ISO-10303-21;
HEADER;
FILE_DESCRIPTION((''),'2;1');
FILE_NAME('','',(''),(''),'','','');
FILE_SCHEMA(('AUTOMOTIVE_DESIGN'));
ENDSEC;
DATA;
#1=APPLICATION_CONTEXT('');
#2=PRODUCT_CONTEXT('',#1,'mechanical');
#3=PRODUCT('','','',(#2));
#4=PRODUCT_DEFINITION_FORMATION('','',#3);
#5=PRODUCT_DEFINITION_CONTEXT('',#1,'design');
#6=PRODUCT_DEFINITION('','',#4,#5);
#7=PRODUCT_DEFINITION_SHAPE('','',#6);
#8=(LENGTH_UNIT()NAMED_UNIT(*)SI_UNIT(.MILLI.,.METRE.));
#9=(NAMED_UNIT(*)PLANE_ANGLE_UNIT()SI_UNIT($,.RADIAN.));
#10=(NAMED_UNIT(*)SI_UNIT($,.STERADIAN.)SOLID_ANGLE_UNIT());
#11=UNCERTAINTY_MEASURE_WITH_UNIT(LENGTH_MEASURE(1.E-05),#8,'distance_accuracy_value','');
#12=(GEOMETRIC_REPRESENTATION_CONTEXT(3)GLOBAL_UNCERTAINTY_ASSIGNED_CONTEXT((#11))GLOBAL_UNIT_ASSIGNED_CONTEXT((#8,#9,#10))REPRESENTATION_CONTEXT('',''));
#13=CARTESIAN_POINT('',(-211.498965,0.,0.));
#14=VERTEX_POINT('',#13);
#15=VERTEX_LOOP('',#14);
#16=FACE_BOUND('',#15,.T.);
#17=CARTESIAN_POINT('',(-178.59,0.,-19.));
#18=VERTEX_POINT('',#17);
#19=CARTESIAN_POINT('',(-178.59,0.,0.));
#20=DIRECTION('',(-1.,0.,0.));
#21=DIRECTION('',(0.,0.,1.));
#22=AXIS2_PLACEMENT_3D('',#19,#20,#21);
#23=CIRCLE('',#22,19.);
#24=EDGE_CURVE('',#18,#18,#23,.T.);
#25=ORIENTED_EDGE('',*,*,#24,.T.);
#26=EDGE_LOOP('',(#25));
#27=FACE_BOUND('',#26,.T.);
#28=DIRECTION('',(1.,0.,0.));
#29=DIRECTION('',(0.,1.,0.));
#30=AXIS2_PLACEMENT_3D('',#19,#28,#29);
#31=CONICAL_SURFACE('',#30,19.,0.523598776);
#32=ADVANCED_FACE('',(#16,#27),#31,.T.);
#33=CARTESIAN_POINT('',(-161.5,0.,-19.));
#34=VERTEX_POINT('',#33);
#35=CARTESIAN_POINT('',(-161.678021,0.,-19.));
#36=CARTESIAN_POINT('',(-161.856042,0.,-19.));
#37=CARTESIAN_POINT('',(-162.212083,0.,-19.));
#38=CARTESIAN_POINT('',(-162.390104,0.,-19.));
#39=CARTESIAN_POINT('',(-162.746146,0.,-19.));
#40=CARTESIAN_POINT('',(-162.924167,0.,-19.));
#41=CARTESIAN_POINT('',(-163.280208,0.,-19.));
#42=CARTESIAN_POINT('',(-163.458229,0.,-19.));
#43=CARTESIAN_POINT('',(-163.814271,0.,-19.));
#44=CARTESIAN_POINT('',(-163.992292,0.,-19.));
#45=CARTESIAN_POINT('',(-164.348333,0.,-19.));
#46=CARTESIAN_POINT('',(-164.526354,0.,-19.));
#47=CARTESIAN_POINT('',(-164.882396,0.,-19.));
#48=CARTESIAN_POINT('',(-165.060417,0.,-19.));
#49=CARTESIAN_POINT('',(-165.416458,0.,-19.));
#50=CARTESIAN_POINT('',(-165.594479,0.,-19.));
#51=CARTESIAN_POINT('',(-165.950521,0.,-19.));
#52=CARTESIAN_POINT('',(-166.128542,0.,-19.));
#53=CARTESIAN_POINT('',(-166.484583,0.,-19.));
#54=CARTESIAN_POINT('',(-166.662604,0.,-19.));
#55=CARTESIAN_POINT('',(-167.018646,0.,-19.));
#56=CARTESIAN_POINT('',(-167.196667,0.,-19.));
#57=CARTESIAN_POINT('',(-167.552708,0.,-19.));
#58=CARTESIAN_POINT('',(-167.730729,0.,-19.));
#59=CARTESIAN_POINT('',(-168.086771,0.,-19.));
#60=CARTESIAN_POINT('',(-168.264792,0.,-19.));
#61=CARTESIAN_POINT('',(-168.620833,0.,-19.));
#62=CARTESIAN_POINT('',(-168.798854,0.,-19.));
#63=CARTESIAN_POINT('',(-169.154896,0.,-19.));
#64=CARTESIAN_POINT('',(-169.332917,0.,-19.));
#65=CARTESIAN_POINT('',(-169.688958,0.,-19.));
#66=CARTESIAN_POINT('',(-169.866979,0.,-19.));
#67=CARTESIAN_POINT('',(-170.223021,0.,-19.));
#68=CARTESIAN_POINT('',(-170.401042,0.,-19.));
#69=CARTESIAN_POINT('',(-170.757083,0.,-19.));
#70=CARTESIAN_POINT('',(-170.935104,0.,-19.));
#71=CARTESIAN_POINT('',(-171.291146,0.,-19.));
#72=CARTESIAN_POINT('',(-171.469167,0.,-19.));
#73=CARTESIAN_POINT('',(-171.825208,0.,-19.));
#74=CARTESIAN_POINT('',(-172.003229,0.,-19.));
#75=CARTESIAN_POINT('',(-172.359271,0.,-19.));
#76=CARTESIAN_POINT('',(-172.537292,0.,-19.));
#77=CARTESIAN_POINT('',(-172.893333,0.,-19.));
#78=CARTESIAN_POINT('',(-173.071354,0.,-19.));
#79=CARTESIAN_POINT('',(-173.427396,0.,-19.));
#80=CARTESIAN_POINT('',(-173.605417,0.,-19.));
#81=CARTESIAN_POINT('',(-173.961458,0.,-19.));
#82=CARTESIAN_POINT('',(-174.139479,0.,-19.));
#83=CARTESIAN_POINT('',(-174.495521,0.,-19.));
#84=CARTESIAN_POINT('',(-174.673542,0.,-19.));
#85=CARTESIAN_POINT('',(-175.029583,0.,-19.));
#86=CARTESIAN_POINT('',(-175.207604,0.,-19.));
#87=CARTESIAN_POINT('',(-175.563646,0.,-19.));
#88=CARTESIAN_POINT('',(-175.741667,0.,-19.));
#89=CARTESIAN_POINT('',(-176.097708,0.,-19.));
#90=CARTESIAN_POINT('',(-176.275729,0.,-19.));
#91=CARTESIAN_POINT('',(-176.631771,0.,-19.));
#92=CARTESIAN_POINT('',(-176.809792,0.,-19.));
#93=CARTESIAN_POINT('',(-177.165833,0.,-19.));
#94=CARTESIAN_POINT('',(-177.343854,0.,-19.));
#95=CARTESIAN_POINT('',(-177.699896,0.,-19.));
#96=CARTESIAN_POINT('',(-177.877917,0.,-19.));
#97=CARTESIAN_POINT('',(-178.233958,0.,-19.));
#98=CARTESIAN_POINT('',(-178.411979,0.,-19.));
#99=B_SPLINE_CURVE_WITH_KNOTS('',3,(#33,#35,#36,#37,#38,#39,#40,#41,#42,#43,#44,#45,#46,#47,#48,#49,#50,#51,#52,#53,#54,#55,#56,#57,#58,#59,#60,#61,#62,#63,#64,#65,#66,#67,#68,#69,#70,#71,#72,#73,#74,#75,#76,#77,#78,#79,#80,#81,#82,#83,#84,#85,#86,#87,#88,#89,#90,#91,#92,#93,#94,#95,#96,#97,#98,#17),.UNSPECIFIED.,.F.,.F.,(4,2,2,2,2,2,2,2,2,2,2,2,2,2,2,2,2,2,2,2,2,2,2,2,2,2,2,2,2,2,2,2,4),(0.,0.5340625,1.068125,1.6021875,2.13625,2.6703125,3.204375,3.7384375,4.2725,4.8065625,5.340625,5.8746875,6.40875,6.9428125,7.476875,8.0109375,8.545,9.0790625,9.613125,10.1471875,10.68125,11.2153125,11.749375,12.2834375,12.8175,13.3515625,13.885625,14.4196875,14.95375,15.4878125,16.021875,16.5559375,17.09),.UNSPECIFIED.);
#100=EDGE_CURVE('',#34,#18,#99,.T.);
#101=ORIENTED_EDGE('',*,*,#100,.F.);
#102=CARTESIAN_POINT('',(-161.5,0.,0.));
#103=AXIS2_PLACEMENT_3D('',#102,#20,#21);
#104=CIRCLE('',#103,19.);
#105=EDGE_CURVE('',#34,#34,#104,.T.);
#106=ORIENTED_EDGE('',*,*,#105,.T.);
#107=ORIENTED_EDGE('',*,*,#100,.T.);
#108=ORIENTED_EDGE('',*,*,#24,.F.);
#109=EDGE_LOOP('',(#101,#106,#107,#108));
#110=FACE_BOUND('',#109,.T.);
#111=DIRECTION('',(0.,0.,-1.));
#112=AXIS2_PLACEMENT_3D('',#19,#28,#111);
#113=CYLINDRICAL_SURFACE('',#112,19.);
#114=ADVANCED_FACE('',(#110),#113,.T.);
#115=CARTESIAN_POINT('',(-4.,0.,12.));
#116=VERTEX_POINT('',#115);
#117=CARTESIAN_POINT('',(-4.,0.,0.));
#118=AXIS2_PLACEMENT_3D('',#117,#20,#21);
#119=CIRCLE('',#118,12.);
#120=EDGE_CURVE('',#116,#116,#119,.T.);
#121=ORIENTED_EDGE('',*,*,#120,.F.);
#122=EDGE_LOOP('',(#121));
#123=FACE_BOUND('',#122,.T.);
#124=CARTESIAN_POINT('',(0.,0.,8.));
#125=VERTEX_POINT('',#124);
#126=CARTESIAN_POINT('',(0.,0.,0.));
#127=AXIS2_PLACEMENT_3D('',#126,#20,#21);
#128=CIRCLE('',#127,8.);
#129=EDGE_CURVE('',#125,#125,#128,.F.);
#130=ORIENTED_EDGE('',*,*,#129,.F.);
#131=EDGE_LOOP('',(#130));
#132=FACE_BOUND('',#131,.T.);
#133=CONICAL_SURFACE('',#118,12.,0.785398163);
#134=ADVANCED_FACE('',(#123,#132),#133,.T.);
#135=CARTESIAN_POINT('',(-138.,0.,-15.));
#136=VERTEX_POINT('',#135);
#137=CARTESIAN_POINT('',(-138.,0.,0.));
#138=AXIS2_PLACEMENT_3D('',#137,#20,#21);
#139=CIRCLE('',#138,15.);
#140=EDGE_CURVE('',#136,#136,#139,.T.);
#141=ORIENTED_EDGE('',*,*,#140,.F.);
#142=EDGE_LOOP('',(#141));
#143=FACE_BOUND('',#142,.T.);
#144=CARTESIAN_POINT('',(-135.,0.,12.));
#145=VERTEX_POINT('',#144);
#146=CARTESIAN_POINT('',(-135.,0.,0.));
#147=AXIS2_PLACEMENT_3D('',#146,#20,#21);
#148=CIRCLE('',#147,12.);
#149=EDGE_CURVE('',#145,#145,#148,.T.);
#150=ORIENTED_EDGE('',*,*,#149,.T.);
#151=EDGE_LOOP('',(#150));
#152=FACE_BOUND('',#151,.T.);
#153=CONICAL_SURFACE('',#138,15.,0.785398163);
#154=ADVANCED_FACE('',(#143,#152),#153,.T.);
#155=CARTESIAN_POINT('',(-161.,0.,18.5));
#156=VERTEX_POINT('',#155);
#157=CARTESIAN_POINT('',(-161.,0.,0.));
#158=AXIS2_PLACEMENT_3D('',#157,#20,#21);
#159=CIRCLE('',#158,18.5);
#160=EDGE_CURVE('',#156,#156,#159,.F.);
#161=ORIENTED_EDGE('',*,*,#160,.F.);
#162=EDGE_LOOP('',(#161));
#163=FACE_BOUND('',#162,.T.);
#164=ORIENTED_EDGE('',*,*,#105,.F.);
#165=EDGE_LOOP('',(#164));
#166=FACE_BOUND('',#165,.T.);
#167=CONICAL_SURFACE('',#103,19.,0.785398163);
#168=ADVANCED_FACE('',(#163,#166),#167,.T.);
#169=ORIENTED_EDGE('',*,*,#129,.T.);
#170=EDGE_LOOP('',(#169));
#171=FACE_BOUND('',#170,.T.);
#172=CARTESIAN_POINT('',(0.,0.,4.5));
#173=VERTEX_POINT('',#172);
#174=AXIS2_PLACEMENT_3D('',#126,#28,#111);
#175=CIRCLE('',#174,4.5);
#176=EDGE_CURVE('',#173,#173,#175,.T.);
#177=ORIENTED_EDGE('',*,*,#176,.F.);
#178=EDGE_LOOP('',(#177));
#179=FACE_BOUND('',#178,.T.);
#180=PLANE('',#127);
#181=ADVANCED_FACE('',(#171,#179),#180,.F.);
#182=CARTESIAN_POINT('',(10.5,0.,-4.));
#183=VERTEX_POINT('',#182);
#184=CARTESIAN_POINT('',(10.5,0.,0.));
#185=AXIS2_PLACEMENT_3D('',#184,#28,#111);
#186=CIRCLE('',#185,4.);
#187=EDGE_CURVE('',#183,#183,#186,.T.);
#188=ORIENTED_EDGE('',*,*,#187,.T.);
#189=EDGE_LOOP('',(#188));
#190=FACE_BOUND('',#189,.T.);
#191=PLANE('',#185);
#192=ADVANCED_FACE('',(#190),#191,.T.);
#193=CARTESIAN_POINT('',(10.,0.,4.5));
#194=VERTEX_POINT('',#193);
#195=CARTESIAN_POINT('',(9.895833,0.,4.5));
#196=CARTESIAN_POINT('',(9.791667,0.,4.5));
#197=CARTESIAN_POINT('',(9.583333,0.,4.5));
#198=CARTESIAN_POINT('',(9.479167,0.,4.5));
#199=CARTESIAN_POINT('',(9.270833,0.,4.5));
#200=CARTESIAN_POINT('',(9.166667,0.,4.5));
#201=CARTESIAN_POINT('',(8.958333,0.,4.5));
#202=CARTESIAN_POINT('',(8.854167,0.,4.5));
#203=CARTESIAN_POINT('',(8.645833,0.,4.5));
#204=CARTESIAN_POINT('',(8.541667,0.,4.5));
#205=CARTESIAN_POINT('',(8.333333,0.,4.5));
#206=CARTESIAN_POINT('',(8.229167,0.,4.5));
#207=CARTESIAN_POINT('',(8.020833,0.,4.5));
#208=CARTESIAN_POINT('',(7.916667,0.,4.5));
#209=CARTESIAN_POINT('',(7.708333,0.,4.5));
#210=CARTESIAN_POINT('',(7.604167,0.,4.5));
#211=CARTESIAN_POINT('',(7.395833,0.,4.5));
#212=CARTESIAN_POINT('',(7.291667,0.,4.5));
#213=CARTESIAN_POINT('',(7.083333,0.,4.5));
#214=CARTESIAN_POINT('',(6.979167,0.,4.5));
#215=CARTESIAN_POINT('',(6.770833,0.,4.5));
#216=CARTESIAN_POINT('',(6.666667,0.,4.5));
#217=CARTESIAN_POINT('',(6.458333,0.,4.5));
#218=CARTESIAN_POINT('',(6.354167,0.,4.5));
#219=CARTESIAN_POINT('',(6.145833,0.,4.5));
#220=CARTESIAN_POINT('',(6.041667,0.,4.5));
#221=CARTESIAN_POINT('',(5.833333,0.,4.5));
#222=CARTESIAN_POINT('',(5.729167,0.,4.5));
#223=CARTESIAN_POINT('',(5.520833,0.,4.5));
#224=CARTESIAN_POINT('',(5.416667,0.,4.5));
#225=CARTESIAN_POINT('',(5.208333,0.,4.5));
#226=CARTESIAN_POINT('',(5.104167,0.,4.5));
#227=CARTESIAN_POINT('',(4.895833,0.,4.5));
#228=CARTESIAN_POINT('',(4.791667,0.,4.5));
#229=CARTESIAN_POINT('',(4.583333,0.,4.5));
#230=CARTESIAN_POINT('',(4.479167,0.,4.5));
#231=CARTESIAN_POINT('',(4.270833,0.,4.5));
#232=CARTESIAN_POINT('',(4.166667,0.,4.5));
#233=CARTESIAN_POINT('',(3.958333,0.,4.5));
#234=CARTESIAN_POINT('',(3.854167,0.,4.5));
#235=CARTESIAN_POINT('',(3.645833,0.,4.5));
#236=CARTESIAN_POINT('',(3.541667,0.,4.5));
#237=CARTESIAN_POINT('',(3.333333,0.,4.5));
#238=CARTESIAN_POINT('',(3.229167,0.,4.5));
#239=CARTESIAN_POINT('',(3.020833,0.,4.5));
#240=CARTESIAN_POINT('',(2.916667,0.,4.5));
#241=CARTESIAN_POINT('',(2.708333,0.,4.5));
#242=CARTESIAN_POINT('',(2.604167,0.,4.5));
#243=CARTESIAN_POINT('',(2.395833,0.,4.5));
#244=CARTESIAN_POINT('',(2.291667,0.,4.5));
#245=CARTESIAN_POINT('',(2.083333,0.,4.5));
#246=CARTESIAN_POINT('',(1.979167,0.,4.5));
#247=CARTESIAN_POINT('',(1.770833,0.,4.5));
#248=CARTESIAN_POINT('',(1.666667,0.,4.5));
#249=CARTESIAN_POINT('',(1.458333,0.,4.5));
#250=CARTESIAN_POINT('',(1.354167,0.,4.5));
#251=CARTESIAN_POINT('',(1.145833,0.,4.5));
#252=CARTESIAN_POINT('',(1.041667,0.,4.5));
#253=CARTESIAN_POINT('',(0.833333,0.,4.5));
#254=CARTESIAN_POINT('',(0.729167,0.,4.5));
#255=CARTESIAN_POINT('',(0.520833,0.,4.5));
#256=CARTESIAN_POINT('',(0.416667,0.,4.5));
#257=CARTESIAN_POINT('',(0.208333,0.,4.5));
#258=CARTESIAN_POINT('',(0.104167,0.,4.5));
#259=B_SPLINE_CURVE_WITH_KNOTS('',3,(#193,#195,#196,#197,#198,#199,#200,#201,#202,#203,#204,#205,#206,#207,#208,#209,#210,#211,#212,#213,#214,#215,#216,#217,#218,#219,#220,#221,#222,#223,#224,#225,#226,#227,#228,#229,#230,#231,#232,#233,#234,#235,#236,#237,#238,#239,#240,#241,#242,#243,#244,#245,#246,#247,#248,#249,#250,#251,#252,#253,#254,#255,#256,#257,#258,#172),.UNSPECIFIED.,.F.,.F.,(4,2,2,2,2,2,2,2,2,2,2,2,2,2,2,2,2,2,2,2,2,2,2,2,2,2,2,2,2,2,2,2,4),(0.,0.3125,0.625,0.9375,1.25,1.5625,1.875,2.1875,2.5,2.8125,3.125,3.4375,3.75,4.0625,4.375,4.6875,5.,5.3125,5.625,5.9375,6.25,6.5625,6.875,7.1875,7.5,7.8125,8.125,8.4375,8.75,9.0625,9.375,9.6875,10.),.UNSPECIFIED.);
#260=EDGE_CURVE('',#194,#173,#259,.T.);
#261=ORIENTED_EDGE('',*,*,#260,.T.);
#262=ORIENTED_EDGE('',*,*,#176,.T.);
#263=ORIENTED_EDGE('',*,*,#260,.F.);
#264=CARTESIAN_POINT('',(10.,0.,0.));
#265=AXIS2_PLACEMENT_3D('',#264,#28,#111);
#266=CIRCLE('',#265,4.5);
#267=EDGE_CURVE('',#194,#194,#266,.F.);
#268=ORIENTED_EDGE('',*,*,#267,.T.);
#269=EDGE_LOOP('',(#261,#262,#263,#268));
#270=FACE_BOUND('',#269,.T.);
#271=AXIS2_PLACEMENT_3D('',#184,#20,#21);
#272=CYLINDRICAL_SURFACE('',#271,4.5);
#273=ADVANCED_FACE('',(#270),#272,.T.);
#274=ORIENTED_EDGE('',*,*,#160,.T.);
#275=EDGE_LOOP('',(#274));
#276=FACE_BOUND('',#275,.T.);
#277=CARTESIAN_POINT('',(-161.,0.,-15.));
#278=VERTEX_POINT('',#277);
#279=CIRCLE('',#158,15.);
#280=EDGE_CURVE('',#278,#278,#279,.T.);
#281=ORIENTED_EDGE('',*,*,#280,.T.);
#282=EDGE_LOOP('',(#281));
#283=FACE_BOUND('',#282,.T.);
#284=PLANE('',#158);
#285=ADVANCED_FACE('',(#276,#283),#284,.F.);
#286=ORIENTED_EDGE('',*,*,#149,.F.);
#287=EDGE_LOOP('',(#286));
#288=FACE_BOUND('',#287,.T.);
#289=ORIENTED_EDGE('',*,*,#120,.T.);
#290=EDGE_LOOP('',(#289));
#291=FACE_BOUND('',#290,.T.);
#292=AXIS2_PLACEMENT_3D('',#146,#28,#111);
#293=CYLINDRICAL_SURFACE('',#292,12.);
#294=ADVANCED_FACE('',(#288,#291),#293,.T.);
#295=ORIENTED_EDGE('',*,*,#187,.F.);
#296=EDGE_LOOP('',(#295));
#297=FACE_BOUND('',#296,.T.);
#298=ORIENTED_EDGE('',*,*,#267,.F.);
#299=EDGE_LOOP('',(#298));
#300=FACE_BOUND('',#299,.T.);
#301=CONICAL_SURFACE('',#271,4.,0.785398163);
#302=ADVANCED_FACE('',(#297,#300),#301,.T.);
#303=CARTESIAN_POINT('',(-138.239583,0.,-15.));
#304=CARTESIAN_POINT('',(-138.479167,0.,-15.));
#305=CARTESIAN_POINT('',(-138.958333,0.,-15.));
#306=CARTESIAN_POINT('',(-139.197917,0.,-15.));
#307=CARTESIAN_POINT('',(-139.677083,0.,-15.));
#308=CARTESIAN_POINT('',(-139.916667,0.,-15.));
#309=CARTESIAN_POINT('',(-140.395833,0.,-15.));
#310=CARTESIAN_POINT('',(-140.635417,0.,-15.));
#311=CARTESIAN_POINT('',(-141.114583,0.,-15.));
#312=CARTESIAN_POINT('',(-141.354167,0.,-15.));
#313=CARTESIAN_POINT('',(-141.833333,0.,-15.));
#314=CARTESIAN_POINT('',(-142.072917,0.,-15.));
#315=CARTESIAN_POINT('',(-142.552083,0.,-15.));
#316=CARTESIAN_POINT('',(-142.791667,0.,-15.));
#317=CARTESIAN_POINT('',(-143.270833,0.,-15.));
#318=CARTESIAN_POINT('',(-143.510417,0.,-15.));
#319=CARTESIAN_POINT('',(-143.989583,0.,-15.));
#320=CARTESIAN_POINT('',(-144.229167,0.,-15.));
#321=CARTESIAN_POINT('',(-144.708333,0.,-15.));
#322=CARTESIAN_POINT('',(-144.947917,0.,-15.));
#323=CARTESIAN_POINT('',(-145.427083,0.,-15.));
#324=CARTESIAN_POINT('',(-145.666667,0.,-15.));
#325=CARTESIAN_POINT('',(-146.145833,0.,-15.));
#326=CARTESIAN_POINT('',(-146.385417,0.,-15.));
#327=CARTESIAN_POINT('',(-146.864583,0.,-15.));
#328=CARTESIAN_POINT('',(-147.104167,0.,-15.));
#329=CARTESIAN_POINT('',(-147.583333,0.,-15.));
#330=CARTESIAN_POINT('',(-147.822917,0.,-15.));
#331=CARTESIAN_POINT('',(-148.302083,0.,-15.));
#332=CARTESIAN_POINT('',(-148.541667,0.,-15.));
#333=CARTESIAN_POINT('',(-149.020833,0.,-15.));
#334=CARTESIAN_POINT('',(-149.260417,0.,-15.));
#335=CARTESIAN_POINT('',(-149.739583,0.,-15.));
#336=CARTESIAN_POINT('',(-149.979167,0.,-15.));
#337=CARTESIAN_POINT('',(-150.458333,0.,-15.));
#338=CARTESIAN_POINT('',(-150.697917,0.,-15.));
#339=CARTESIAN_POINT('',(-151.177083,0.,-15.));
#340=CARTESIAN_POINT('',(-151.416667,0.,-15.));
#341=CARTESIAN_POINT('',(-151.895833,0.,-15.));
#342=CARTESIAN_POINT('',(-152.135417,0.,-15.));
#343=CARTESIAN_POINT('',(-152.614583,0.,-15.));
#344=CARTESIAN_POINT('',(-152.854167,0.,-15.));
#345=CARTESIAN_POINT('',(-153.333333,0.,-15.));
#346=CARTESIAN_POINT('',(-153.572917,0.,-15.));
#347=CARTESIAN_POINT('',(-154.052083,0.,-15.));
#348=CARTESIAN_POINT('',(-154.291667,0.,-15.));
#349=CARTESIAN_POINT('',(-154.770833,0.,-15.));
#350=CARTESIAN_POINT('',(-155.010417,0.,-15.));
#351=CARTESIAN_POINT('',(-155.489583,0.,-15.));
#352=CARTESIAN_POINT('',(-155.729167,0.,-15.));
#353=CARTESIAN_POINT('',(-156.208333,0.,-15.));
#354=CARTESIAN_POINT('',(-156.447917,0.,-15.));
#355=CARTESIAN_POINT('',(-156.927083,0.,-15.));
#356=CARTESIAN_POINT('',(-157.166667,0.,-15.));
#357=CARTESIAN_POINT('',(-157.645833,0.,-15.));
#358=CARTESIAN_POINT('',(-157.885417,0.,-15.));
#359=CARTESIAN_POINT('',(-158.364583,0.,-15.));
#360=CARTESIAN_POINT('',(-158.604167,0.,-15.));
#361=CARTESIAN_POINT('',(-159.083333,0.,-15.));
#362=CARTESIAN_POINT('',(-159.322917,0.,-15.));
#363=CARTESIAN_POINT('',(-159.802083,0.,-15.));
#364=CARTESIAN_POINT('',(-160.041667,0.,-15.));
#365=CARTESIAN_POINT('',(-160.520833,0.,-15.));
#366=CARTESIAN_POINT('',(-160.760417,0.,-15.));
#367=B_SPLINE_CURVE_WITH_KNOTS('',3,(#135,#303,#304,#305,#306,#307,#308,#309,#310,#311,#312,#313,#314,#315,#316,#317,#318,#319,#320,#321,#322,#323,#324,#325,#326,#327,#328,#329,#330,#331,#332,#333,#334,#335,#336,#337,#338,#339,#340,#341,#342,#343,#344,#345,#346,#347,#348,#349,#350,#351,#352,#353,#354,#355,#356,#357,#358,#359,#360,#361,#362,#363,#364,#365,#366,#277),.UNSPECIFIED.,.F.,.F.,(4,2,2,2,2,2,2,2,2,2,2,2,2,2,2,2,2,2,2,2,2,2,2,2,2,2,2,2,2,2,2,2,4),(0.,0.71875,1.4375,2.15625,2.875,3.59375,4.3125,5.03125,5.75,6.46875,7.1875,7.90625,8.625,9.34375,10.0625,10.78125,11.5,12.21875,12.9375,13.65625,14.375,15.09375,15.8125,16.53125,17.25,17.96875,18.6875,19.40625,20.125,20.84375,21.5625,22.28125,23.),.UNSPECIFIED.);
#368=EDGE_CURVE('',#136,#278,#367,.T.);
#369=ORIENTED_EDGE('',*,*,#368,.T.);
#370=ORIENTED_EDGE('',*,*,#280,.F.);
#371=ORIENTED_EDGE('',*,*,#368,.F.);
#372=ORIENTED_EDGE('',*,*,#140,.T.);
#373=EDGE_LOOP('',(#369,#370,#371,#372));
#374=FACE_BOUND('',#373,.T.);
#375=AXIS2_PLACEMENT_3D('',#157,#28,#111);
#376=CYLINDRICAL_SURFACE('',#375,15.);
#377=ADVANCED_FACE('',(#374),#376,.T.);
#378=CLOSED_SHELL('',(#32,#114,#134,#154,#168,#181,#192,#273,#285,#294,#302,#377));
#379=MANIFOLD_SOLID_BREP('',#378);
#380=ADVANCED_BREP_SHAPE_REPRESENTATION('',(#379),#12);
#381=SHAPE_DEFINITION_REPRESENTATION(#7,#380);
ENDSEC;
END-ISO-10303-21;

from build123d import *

# Parameters (mm, degrees)
SZKIC5_R                    = 4.5
DODANIE_WYCI_GNI_CIE4_DEPTH = 10.5
SFAZOWANIE1_SIZE            = 0.5
SZKIC6_R                    = 12
DODANIE_WYCI_GNI_CIE5_DEPTH = 135
SFAZOWANIE2_SIZE            = 4
SZKIC7_R                    = 15
DODANIE_WYCI_GNI_CIE6_DEPTH = 26
SFAZOWANIE4_SIZE            = 3
SZKIC8_R                    = 19
DODANIE_WYCI_GNI_CIE7_DEPTH = 17.59
SFAZOWANIE5_SIZE            = 0.5


with BuildPart() as part:
    # Szkic5 → Dodanie-wyciągnięcie4 (new body)
    with BuildSketch(Plane(origin=(0, 0, 0), x_dir=(0, 0, -1), z_dir=(1, 0, 0))):
        with Locations(Location((0, 0, 0), (0, 0, 180))):
            Circle(SZKIC5_R)
    extrude(amount=DODANIE_WYCI_GNI_CIE4_DEPTH)

    # Sfazowanie1
    sfazowanie1_edges = [part.edges().sort_by_distance(p)[0] for p in [
        (10.5, 0, -4.5),
    ]]
    chamfer(sfazowanie1_edges, length=SFAZOWANIE1_SIZE)

    # Szkic6 → Dodanie-wyciągnięcie5 (add)
    with BuildSketch(Plane.ZY):
        Circle(SZKIC6_R)
    extrude(amount=DODANIE_WYCI_GNI_CIE5_DEPTH)

    # Sfazowanie2
    sfazowanie2_edges = [part.edges().sort_by_distance(p)[0] for p in [
        (0, 0, -12),
    ]]
    chamfer(sfazowanie2_edges, length=SFAZOWANIE2_SIZE)

    # Szkic7 → Dodanie-wyciągnięcie6 (add)
    with BuildSketch(Plane.ZY.offset(135)):
        with Locations(Location((0, 0, 0), (0, 0, 180))):
            Circle(SZKIC7_R)
    extrude(amount=DODANIE_WYCI_GNI_CIE6_DEPTH)

    # Sfazowanie4
    sfazowanie4_edges = [part.edges().sort_by_distance(p)[0] for p in [
        (-135, 0, 15),
    ]]
    chamfer(sfazowanie4_edges, length=SFAZOWANIE4_SIZE - 0.0001)  # a hair under: the kernel refuses the full size

    # Szkic8 → Dodanie-wyciągnięcie7 (add)
    with BuildSketch(Plane.ZY.offset(161)):
        with Locations(Location((0, 0, 0), (0, 0, 180))):
            Circle(SZKIC8_R)
    extrude(amount=DODANIE_WYCI_GNI_CIE7_DEPTH)

    # Szkic10 → Obrót1 (revolve)
    with BuildSketch(Plane.XY):
        Polygon((-211.498965344, 0), (-178.59, 19), (-178.59, 0), align=None)
    revolve(axis=Axis((-178.59, 0, 0), (-1, 0, 0)))

    # Sfazowanie5
    sfazowanie5_edges = [part.edges().sort_by_distance(p)[0] for p in [
        (-161, 0, 19),
    ]]
    chamfer(sfazowanie5_edges, length=SFAZOWANIE5_SIZE)


solid = part.part
